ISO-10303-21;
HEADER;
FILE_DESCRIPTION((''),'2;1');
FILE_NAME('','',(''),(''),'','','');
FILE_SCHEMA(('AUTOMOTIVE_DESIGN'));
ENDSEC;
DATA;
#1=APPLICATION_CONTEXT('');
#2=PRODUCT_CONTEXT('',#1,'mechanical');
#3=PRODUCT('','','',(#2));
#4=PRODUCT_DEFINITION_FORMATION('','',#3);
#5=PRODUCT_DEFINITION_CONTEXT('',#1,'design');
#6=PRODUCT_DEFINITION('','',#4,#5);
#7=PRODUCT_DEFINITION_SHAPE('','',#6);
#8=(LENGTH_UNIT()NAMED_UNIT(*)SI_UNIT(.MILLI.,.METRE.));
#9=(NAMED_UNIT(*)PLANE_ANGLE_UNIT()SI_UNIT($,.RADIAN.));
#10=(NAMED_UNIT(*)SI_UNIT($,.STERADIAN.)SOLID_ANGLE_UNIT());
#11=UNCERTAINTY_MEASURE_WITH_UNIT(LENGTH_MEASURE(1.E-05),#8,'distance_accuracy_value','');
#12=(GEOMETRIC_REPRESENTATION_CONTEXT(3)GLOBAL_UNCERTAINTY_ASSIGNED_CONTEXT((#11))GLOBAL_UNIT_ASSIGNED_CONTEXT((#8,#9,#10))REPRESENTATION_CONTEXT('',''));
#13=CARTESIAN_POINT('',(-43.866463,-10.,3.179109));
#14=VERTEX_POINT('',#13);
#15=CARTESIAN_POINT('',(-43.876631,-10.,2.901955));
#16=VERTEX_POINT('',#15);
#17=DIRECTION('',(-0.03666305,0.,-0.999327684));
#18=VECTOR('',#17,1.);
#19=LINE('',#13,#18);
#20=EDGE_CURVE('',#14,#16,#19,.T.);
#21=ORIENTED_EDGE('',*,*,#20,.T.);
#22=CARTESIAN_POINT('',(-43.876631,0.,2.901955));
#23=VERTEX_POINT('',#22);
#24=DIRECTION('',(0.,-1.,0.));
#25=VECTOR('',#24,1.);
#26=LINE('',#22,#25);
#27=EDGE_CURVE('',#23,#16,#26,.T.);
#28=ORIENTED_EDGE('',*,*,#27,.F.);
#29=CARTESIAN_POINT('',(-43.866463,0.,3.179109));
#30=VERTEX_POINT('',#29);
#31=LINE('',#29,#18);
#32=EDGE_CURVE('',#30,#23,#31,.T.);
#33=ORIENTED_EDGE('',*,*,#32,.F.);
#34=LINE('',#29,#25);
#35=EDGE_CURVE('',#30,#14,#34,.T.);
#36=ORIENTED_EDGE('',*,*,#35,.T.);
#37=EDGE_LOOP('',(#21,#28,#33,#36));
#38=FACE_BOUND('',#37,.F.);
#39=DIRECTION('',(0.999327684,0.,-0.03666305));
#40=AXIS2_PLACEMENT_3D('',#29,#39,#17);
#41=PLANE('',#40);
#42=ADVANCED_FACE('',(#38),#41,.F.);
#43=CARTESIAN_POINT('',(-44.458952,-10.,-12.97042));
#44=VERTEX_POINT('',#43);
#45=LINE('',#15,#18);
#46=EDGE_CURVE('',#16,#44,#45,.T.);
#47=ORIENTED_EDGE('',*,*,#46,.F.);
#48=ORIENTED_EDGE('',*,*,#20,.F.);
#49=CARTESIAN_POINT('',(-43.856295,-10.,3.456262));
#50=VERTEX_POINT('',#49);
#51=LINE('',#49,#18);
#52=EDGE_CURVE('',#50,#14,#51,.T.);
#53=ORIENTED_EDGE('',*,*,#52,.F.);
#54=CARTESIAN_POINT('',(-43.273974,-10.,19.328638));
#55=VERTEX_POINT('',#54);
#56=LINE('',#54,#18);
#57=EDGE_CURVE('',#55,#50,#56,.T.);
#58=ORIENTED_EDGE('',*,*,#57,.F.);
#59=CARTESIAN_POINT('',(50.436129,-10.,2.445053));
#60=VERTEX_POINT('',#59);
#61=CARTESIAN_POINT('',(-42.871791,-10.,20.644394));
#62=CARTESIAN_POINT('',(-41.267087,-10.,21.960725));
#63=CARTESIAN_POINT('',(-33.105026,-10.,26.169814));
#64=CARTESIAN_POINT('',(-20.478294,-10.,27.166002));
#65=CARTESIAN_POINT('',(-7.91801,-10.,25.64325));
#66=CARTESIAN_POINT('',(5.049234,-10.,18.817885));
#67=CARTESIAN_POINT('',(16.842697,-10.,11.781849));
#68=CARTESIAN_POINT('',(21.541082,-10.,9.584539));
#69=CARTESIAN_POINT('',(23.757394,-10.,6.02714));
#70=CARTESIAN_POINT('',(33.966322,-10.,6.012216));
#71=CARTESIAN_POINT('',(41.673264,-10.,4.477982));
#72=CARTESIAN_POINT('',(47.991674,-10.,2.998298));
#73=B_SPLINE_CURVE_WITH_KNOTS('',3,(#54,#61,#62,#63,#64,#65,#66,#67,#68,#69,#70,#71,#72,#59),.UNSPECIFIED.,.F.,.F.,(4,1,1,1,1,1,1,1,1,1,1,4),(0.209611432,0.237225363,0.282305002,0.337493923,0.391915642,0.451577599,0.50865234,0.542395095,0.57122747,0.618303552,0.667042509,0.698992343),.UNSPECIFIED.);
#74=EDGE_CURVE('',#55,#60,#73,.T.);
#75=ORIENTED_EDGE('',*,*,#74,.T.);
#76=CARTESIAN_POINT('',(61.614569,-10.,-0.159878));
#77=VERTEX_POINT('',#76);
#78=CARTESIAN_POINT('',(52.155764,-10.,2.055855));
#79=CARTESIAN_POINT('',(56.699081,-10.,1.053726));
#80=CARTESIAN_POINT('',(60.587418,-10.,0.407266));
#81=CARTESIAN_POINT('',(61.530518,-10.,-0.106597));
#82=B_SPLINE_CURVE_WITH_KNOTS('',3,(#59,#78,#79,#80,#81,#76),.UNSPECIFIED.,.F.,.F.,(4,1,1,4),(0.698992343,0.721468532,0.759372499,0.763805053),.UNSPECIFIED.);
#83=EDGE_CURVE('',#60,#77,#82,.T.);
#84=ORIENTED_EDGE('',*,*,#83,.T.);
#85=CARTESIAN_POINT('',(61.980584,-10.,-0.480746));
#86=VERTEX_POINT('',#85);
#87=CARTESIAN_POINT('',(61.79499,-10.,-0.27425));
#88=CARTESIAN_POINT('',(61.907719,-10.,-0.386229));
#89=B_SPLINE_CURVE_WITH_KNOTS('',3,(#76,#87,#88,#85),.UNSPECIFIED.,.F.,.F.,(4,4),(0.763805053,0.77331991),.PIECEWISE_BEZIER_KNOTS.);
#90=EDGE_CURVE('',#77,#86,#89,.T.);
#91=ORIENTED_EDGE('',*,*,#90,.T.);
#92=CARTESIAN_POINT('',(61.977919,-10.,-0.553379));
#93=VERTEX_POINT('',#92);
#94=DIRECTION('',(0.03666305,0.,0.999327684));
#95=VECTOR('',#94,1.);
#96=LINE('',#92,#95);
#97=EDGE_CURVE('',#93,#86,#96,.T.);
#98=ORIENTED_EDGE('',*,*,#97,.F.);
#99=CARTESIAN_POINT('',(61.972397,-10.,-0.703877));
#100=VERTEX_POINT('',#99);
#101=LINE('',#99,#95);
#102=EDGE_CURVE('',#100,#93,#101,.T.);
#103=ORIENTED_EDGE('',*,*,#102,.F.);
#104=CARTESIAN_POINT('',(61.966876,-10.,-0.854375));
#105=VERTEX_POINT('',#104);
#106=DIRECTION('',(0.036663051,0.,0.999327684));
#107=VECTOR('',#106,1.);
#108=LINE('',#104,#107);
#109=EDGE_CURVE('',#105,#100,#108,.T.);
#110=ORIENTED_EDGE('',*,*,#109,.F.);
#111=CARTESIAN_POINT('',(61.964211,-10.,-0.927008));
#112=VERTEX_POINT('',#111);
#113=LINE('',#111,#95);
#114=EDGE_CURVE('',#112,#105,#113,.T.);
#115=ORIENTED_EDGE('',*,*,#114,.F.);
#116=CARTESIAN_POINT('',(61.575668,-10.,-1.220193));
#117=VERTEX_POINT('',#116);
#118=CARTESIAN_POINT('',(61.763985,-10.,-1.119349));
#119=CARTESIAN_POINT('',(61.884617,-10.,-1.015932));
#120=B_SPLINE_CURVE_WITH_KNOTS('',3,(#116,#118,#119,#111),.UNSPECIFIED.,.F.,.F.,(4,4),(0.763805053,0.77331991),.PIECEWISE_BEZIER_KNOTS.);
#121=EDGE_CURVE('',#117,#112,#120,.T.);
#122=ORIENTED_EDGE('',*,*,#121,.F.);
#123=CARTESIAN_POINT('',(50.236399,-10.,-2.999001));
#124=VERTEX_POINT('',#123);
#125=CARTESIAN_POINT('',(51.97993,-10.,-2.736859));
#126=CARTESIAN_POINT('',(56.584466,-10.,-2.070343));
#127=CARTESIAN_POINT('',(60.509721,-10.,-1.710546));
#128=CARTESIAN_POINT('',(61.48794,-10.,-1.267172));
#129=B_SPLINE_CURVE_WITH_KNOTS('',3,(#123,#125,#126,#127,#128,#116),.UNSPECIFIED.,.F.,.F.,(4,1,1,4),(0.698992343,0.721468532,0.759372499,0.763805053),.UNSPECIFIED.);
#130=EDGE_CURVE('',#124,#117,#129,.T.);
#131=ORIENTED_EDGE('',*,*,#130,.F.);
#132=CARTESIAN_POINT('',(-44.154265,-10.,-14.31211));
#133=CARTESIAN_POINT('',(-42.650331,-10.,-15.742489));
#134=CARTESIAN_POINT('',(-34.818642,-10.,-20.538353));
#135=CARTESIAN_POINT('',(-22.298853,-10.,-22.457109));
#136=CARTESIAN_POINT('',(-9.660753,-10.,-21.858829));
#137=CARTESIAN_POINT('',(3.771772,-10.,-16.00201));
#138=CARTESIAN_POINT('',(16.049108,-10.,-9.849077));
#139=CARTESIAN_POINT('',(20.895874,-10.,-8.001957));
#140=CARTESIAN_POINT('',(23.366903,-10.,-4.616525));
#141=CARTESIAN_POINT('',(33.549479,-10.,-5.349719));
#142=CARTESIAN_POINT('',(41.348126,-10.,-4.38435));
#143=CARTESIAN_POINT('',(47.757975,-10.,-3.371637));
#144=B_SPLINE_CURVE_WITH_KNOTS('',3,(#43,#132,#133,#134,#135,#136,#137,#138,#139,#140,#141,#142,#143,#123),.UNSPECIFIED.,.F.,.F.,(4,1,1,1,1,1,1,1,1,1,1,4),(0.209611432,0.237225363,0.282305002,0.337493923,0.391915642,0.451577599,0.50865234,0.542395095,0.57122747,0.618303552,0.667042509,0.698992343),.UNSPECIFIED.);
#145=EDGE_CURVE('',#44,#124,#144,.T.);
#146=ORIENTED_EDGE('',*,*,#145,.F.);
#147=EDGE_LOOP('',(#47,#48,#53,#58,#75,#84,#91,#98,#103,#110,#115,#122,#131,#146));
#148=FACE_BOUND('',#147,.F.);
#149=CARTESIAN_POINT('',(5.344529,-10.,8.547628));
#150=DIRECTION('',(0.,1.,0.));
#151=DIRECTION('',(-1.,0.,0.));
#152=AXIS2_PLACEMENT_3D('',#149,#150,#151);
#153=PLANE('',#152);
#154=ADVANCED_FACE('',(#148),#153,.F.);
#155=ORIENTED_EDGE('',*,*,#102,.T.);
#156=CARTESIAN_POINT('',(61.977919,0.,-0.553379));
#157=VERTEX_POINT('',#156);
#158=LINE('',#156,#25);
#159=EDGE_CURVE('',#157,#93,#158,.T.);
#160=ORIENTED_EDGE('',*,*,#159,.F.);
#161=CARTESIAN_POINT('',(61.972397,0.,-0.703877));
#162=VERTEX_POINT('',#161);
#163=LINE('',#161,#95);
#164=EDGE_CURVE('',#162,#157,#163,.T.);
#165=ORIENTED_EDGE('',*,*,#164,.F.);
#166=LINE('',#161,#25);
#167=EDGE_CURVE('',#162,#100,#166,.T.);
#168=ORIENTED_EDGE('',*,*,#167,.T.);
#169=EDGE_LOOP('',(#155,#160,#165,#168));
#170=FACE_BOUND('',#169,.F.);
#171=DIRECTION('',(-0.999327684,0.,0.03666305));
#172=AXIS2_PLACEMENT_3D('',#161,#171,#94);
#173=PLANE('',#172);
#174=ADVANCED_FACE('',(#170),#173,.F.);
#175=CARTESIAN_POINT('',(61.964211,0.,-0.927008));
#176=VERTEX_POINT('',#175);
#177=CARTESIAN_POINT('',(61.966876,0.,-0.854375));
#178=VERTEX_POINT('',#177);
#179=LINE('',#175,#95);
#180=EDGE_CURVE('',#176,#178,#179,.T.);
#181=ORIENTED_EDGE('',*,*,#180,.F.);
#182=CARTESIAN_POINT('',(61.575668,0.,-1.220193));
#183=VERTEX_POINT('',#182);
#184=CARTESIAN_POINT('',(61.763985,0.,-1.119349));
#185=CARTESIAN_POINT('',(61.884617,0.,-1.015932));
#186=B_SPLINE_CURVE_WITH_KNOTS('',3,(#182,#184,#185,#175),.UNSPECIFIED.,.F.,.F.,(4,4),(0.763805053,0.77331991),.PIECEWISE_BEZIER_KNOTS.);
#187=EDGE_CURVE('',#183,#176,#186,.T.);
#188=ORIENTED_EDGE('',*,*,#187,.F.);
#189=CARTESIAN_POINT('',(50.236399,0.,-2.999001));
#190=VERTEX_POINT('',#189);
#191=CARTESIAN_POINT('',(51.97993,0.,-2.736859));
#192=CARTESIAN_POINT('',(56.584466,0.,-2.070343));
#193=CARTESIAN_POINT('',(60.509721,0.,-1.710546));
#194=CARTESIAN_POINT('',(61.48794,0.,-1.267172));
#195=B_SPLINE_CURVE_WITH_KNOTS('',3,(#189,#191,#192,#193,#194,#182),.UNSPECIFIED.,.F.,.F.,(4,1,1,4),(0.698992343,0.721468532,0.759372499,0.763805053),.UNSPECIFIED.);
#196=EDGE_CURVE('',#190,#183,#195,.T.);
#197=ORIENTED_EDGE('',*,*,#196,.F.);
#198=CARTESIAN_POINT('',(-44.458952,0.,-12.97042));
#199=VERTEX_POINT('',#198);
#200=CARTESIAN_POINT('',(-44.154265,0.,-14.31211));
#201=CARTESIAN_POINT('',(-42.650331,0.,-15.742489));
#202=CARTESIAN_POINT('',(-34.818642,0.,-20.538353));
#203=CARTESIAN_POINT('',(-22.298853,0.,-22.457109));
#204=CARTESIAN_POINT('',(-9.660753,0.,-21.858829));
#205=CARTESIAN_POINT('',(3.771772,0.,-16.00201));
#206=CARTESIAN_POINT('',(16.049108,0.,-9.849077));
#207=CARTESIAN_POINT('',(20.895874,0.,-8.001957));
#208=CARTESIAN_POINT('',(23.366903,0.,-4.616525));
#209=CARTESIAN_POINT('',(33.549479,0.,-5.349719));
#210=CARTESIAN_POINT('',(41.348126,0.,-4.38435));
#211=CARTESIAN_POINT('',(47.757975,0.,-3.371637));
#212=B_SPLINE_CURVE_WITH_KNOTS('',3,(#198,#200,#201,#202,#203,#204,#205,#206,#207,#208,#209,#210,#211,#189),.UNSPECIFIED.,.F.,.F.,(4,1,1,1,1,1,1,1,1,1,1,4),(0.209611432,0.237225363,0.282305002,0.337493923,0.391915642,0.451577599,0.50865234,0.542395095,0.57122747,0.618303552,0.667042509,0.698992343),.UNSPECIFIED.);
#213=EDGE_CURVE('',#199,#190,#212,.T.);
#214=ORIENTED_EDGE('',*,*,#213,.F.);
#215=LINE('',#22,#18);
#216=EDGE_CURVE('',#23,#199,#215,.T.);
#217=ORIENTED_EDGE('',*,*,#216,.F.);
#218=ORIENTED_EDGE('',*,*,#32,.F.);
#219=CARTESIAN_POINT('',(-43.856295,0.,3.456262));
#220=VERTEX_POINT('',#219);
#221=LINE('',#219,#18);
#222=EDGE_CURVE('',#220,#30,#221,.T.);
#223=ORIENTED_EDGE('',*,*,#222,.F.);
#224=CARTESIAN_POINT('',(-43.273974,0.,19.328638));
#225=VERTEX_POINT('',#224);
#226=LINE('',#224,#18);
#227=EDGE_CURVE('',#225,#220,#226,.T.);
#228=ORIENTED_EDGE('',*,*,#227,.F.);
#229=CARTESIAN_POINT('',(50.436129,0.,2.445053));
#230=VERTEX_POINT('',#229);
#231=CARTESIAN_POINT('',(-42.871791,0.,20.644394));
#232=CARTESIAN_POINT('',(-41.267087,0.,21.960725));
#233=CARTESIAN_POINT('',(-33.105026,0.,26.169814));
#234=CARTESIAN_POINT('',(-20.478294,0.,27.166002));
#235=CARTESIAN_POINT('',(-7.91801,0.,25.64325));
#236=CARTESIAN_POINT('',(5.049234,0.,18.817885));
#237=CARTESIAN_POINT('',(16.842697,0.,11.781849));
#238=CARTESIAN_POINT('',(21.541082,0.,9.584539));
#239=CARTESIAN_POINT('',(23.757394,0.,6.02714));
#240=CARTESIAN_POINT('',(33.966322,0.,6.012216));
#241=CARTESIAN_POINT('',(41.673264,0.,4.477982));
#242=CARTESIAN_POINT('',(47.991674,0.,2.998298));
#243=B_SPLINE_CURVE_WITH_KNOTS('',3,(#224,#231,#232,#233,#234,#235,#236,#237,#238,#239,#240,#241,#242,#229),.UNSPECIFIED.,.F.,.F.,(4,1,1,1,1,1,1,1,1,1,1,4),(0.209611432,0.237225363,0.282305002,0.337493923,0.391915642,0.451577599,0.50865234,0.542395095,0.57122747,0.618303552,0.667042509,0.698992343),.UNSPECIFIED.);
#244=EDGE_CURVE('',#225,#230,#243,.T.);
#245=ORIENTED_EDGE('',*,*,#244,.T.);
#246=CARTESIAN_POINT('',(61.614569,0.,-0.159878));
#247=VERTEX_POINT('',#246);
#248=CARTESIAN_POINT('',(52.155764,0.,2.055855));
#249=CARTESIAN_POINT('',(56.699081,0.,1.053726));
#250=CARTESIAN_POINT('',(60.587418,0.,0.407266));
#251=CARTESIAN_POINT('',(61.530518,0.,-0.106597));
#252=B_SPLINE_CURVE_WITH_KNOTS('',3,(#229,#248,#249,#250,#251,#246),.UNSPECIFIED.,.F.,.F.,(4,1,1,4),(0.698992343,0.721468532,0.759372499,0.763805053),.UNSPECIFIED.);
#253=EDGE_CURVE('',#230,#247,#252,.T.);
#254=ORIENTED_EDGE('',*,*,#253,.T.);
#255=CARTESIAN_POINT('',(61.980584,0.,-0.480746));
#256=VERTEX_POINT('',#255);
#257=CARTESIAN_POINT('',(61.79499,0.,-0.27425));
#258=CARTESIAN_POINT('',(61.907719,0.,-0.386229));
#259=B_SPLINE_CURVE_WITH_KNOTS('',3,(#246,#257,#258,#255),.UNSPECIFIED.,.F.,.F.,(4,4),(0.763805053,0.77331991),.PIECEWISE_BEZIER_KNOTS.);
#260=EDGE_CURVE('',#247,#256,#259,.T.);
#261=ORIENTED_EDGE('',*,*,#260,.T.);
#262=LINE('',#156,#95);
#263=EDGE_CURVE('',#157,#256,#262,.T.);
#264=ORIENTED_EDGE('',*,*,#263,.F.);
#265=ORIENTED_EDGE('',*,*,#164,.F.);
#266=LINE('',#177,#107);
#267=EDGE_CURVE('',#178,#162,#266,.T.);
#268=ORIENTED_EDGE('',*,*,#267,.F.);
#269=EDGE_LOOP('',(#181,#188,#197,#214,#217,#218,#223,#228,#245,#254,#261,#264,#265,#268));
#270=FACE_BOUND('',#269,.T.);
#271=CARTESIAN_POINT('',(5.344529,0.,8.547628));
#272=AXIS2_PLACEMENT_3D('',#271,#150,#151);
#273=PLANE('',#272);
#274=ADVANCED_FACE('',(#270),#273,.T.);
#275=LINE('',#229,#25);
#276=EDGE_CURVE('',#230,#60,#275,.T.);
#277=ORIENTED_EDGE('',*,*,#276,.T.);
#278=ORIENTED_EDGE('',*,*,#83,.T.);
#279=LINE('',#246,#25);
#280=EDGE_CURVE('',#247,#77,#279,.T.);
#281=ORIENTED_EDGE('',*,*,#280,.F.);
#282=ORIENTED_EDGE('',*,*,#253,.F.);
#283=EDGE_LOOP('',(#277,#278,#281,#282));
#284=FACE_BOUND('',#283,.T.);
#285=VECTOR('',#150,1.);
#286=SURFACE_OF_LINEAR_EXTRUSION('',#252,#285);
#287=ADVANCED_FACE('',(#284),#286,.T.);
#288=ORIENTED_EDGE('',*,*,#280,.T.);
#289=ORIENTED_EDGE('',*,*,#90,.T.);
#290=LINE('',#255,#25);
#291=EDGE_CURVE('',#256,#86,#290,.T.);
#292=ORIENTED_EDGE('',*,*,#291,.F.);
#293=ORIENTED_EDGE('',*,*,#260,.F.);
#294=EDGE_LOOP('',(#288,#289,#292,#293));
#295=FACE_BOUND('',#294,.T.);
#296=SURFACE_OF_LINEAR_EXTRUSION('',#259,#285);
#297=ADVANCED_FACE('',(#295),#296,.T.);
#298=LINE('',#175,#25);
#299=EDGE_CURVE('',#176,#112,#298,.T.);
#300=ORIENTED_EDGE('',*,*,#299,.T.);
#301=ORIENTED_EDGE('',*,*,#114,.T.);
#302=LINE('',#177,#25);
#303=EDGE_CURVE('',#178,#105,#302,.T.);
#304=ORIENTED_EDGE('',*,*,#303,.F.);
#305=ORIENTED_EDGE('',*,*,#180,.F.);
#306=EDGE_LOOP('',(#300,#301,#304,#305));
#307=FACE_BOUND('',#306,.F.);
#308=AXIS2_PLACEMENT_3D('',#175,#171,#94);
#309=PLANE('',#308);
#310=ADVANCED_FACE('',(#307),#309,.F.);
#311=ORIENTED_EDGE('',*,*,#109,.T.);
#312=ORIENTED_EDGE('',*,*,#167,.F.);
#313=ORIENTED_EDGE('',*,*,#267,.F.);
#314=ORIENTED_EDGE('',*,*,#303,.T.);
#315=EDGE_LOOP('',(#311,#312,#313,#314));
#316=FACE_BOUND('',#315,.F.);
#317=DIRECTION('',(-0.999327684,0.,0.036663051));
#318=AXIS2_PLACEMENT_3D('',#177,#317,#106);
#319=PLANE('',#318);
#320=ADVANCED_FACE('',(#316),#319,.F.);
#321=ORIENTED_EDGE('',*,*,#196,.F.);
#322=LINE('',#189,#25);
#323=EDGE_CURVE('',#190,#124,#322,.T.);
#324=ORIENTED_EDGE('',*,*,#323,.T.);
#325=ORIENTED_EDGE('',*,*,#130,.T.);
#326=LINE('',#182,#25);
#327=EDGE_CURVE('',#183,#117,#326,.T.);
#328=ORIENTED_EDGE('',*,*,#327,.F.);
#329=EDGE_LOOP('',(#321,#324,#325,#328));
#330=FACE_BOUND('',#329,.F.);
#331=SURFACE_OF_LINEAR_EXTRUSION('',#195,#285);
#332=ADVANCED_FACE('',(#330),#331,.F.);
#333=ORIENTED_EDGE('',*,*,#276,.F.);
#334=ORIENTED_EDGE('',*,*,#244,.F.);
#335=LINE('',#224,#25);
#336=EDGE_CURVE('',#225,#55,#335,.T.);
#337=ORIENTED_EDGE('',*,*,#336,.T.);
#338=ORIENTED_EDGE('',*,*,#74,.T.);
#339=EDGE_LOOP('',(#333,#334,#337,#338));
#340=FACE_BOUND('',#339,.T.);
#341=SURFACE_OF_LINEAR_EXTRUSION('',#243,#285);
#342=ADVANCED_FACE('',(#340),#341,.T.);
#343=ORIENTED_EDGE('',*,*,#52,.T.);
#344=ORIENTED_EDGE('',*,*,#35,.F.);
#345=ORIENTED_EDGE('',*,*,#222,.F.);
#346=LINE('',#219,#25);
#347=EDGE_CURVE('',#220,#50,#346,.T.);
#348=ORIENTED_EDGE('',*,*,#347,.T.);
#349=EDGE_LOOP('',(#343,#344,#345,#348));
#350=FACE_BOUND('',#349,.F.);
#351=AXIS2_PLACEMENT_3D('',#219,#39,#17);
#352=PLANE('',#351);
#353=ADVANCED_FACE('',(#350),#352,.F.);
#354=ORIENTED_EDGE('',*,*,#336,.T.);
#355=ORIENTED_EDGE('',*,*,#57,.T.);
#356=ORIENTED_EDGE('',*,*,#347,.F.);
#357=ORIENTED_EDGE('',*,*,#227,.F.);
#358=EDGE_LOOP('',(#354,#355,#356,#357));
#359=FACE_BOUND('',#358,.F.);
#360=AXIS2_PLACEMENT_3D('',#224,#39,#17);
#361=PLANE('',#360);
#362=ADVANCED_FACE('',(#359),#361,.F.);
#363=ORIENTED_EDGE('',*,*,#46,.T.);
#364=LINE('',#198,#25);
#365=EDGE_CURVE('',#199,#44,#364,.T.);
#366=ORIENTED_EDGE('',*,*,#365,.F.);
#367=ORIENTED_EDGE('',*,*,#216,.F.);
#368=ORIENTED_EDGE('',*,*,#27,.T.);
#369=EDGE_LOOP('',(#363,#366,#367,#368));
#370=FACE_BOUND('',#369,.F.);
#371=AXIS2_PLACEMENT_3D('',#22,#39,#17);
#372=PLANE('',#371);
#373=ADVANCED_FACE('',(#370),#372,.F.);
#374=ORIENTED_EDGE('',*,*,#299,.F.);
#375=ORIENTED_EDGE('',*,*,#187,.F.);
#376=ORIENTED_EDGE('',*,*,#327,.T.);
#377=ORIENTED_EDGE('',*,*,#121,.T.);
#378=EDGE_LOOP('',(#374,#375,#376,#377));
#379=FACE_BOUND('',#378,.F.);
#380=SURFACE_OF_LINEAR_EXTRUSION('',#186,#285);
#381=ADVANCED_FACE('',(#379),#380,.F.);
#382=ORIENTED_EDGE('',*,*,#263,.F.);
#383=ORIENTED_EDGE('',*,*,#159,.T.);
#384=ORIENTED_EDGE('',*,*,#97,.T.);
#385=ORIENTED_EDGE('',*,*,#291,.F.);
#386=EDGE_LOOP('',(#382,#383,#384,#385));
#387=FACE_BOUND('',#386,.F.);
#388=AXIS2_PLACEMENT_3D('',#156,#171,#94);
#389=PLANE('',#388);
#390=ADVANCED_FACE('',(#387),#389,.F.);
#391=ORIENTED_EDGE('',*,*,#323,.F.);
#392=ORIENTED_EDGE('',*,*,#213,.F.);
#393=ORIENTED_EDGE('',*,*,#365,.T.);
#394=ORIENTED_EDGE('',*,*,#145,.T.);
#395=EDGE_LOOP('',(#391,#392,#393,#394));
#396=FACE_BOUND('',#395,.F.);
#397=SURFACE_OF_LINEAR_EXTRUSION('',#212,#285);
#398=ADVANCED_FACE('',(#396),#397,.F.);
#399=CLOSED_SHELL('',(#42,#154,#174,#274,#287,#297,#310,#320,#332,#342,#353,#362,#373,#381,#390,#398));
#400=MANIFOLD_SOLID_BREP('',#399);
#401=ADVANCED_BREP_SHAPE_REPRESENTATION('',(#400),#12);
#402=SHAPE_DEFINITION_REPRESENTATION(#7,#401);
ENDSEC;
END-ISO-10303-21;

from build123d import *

# Parameters (mm, degrees)
F1_DEPTH = 10


with BuildPart() as f1:
    # F0 (on Front) → F1 (new body)
    with BuildSketch(Plane.XZ):
        with BuildLine():
            add(Edge.make_bspline(
                [(-43.2739737539, 19.3286379981), (-42.8717910323, 20.6443938488), (-41.2670866914, 21.9607246818), (-33.1050259673, 26.1698144492), (-20.4782941502, 27.1660016518), (-7.9180102102, 25.6432503479), (5.0492344453, 18.8178845805), (16.8426971438, 11.7818486723), (21.5410823221, 9.5845389909), (23.7573944562, 6.0271395456), (33.9663222046, 6.0122157554), (41.6732644409, 4.4779816736), (47.9916737559, 2.9982979686), (50.4361293155, 2.4450533648)],
                knots=[0.2096114324, 0.2096114324, 0.2096114324, 0.2096114324, 0.2372253632, 0.282305002, 0.3374939232, 0.3919156422, 0.4515775986, 0.5086523402, 0.5423950946, 0.5712274702, 0.6183035523, 0.6670425092, 0.6989923434, 0.6989923434, 0.6989923434, 0.6989923434], degree=3))
            Line((-43.2739737539, 19.3286379981), (-43.8562949661, 3.456262298))
            Line((-43.8562949661, 3.456262298), (-43.866463093, 3.1791088515))
            Line((-43.866463093, 3.1791088515), (61.9723973752, -0.7038772044))
            Line((61.9723973752, -0.7038772044), (61.9779187996, -0.5533792985))
            add(Edge.make_bspline(
                [(61.9779187996, -0.5533792985), (61.9043423038, -0.4347153333), (61.7777869789, -0.2956526047), (61.614568699, -0.1598779548)],
                knots=[0.7844933866, 0.7844933866, 0.7844933866, 0.7844933866, 0.7922828741, 0.7922828741, 0.7922828741, 0.7922828741], degree=3))
            add(Edge.make_bspline(
                [(50.4361293155, 2.4450533648), (52.1557640437, 2.0558547843), (56.6990812586, 1.0537255108), (60.587418179, 0.4072656539), (61.5305184171, -0.106596957), (61.614568699, -0.1598779548)],
                knots=[0.6989923434, 0.6989923434, 0.6989923434, 0.6989923434, 0.7214685321, 0.7593724987, 0.7638050529, 0.7638050529, 0.7638050529, 0.7638050529], degree=3))
        make_face()
        with BuildLine():
            Line((-43.866463093, 3.1791088515), (-43.8766312199, 2.9019554051))
            Line((-43.8766312199, 2.9019554051), (-44.4589524321, -12.9704202951))
            add(Edge.make_bspline(
                [(-44.4589524321, -12.9704202951), (-44.1542653031, -14.3121095861), (-42.650331497, -15.7424892526), (-34.8186419571, -20.5383531877), (-22.2988527346, -22.4571088129), (-9.6607529946, -21.8588286533), (3.7717720363, -16.0020101391), (16.0491078911, -9.8490768524), (20.8958739527, -8.001956969), (23.366902701, -4.6165253548), (33.5494787592, -5.3497192653), (41.3481257392, -4.3843498373), (47.757975395, -3.3716368828), (50.2363993771, -2.9990014855)],
                knots=[0.2096114324, 0.2096114324, 0.2096114324, 0.2096114324, 0.2372253632, 0.282305002, 0.3374939232, 0.3919156422, 0.4515775986, 0.5086523402, 0.5423950946, 0.5712274702, 0.6183035523, 0.6670425092, 0.6989923434, 0.6989923434, 0.6989923434, 0.6989923434], degree=3))
            add(Edge.make_bspline(
                [(50.2363993771, -2.9990014855), (51.9799303381, -2.7368585443), (56.5844663162, -2.0703431109), (60.5097205041, -1.7105460656), (61.4879395595, -1.2671722713), (61.5756681453, -1.2201934479)],
                knots=[0.6989923434, 0.6989923434, 0.6989923434, 0.6989923434, 0.7214685321, 0.7593724987, 0.7638050529, 0.7638050529, 0.7638050529, 0.7638050529], degree=3))
            add(Edge.make_bspline(
                [(61.9668759507, -0.8543751103), (61.884801939, -0.9673286138), (61.7483967681, -1.0967439225), (61.5756681453, -1.2201934479)],
                knots=[0.7844933866, 0.7844933866, 0.7844933866, 0.7844933866, 0.7922828741, 0.7922828741, 0.7922828741, 0.7922828741], degree=3))
            Line((61.9668759507, -0.8543751103), (61.9723973752, -0.7038772044))
            Line((61.9723973752, -0.7038772044), (-43.866463093, 3.1791088515))
        make_face()
        with BuildLine():
            add(Edge.make_bspline(
                [(61.614568699, -0.1598779548), (61.7949898213, -0.2742501756), (61.9077194324, -0.3862288488), (61.9805835524, -0.4807459177)],
                knots=[0.7638050529, 0.7638050529, 0.7638050529, 0.7638050529, 0.7733199098, 0.7733199098, 0.7733199098, 0.7733199098], degree=3))
            add(Edge.make_bspline(
                [(61.9779187996, -0.5533792985), (61.9043423038, -0.4347153333), (61.7777869789, -0.2956526047), (61.614568699, -0.1598779548)],
                knots=[0.7844933866, 0.7844933866, 0.7844933866, 0.7844933866, 0.7922828741, 0.7922828741, 0.7922828741, 0.7922828741], degree=3))
            Line((61.9779187996, -0.5533792985), (61.9805835524, -0.4807459177))
        make_face()
        with BuildLine():
            Line((61.9642111979, -0.9270084911), (61.9668759507, -0.8543751103))
            add(Edge.make_bspline(
                [(61.9668759507, -0.8543751103), (61.884801939, -0.9673286138), (61.7483967681, -1.0967439225), (61.5756681453, -1.2201934479)],
                knots=[0.7844933866, 0.7844933866, 0.7844933866, 0.7844933866, 0.7922828741, 0.7922828741, 0.7922828741, 0.7922828741], degree=3))
            add(Edge.make_bspline(
                [(61.5756681453, -1.2201934479), (61.7639850615, -1.1193493835), (61.8846170541, -1.0159322145), (61.9642111979, -0.9270084911)],
                knots=[0.7638050529, 0.7638050529, 0.7638050529, 0.7638050529, 0.7733199098, 0.7733199098, 0.7733199098, 0.7733199098], degree=3))
        make_face()
    extrude(amount=F1_DEPTH)


solid = f1.part
